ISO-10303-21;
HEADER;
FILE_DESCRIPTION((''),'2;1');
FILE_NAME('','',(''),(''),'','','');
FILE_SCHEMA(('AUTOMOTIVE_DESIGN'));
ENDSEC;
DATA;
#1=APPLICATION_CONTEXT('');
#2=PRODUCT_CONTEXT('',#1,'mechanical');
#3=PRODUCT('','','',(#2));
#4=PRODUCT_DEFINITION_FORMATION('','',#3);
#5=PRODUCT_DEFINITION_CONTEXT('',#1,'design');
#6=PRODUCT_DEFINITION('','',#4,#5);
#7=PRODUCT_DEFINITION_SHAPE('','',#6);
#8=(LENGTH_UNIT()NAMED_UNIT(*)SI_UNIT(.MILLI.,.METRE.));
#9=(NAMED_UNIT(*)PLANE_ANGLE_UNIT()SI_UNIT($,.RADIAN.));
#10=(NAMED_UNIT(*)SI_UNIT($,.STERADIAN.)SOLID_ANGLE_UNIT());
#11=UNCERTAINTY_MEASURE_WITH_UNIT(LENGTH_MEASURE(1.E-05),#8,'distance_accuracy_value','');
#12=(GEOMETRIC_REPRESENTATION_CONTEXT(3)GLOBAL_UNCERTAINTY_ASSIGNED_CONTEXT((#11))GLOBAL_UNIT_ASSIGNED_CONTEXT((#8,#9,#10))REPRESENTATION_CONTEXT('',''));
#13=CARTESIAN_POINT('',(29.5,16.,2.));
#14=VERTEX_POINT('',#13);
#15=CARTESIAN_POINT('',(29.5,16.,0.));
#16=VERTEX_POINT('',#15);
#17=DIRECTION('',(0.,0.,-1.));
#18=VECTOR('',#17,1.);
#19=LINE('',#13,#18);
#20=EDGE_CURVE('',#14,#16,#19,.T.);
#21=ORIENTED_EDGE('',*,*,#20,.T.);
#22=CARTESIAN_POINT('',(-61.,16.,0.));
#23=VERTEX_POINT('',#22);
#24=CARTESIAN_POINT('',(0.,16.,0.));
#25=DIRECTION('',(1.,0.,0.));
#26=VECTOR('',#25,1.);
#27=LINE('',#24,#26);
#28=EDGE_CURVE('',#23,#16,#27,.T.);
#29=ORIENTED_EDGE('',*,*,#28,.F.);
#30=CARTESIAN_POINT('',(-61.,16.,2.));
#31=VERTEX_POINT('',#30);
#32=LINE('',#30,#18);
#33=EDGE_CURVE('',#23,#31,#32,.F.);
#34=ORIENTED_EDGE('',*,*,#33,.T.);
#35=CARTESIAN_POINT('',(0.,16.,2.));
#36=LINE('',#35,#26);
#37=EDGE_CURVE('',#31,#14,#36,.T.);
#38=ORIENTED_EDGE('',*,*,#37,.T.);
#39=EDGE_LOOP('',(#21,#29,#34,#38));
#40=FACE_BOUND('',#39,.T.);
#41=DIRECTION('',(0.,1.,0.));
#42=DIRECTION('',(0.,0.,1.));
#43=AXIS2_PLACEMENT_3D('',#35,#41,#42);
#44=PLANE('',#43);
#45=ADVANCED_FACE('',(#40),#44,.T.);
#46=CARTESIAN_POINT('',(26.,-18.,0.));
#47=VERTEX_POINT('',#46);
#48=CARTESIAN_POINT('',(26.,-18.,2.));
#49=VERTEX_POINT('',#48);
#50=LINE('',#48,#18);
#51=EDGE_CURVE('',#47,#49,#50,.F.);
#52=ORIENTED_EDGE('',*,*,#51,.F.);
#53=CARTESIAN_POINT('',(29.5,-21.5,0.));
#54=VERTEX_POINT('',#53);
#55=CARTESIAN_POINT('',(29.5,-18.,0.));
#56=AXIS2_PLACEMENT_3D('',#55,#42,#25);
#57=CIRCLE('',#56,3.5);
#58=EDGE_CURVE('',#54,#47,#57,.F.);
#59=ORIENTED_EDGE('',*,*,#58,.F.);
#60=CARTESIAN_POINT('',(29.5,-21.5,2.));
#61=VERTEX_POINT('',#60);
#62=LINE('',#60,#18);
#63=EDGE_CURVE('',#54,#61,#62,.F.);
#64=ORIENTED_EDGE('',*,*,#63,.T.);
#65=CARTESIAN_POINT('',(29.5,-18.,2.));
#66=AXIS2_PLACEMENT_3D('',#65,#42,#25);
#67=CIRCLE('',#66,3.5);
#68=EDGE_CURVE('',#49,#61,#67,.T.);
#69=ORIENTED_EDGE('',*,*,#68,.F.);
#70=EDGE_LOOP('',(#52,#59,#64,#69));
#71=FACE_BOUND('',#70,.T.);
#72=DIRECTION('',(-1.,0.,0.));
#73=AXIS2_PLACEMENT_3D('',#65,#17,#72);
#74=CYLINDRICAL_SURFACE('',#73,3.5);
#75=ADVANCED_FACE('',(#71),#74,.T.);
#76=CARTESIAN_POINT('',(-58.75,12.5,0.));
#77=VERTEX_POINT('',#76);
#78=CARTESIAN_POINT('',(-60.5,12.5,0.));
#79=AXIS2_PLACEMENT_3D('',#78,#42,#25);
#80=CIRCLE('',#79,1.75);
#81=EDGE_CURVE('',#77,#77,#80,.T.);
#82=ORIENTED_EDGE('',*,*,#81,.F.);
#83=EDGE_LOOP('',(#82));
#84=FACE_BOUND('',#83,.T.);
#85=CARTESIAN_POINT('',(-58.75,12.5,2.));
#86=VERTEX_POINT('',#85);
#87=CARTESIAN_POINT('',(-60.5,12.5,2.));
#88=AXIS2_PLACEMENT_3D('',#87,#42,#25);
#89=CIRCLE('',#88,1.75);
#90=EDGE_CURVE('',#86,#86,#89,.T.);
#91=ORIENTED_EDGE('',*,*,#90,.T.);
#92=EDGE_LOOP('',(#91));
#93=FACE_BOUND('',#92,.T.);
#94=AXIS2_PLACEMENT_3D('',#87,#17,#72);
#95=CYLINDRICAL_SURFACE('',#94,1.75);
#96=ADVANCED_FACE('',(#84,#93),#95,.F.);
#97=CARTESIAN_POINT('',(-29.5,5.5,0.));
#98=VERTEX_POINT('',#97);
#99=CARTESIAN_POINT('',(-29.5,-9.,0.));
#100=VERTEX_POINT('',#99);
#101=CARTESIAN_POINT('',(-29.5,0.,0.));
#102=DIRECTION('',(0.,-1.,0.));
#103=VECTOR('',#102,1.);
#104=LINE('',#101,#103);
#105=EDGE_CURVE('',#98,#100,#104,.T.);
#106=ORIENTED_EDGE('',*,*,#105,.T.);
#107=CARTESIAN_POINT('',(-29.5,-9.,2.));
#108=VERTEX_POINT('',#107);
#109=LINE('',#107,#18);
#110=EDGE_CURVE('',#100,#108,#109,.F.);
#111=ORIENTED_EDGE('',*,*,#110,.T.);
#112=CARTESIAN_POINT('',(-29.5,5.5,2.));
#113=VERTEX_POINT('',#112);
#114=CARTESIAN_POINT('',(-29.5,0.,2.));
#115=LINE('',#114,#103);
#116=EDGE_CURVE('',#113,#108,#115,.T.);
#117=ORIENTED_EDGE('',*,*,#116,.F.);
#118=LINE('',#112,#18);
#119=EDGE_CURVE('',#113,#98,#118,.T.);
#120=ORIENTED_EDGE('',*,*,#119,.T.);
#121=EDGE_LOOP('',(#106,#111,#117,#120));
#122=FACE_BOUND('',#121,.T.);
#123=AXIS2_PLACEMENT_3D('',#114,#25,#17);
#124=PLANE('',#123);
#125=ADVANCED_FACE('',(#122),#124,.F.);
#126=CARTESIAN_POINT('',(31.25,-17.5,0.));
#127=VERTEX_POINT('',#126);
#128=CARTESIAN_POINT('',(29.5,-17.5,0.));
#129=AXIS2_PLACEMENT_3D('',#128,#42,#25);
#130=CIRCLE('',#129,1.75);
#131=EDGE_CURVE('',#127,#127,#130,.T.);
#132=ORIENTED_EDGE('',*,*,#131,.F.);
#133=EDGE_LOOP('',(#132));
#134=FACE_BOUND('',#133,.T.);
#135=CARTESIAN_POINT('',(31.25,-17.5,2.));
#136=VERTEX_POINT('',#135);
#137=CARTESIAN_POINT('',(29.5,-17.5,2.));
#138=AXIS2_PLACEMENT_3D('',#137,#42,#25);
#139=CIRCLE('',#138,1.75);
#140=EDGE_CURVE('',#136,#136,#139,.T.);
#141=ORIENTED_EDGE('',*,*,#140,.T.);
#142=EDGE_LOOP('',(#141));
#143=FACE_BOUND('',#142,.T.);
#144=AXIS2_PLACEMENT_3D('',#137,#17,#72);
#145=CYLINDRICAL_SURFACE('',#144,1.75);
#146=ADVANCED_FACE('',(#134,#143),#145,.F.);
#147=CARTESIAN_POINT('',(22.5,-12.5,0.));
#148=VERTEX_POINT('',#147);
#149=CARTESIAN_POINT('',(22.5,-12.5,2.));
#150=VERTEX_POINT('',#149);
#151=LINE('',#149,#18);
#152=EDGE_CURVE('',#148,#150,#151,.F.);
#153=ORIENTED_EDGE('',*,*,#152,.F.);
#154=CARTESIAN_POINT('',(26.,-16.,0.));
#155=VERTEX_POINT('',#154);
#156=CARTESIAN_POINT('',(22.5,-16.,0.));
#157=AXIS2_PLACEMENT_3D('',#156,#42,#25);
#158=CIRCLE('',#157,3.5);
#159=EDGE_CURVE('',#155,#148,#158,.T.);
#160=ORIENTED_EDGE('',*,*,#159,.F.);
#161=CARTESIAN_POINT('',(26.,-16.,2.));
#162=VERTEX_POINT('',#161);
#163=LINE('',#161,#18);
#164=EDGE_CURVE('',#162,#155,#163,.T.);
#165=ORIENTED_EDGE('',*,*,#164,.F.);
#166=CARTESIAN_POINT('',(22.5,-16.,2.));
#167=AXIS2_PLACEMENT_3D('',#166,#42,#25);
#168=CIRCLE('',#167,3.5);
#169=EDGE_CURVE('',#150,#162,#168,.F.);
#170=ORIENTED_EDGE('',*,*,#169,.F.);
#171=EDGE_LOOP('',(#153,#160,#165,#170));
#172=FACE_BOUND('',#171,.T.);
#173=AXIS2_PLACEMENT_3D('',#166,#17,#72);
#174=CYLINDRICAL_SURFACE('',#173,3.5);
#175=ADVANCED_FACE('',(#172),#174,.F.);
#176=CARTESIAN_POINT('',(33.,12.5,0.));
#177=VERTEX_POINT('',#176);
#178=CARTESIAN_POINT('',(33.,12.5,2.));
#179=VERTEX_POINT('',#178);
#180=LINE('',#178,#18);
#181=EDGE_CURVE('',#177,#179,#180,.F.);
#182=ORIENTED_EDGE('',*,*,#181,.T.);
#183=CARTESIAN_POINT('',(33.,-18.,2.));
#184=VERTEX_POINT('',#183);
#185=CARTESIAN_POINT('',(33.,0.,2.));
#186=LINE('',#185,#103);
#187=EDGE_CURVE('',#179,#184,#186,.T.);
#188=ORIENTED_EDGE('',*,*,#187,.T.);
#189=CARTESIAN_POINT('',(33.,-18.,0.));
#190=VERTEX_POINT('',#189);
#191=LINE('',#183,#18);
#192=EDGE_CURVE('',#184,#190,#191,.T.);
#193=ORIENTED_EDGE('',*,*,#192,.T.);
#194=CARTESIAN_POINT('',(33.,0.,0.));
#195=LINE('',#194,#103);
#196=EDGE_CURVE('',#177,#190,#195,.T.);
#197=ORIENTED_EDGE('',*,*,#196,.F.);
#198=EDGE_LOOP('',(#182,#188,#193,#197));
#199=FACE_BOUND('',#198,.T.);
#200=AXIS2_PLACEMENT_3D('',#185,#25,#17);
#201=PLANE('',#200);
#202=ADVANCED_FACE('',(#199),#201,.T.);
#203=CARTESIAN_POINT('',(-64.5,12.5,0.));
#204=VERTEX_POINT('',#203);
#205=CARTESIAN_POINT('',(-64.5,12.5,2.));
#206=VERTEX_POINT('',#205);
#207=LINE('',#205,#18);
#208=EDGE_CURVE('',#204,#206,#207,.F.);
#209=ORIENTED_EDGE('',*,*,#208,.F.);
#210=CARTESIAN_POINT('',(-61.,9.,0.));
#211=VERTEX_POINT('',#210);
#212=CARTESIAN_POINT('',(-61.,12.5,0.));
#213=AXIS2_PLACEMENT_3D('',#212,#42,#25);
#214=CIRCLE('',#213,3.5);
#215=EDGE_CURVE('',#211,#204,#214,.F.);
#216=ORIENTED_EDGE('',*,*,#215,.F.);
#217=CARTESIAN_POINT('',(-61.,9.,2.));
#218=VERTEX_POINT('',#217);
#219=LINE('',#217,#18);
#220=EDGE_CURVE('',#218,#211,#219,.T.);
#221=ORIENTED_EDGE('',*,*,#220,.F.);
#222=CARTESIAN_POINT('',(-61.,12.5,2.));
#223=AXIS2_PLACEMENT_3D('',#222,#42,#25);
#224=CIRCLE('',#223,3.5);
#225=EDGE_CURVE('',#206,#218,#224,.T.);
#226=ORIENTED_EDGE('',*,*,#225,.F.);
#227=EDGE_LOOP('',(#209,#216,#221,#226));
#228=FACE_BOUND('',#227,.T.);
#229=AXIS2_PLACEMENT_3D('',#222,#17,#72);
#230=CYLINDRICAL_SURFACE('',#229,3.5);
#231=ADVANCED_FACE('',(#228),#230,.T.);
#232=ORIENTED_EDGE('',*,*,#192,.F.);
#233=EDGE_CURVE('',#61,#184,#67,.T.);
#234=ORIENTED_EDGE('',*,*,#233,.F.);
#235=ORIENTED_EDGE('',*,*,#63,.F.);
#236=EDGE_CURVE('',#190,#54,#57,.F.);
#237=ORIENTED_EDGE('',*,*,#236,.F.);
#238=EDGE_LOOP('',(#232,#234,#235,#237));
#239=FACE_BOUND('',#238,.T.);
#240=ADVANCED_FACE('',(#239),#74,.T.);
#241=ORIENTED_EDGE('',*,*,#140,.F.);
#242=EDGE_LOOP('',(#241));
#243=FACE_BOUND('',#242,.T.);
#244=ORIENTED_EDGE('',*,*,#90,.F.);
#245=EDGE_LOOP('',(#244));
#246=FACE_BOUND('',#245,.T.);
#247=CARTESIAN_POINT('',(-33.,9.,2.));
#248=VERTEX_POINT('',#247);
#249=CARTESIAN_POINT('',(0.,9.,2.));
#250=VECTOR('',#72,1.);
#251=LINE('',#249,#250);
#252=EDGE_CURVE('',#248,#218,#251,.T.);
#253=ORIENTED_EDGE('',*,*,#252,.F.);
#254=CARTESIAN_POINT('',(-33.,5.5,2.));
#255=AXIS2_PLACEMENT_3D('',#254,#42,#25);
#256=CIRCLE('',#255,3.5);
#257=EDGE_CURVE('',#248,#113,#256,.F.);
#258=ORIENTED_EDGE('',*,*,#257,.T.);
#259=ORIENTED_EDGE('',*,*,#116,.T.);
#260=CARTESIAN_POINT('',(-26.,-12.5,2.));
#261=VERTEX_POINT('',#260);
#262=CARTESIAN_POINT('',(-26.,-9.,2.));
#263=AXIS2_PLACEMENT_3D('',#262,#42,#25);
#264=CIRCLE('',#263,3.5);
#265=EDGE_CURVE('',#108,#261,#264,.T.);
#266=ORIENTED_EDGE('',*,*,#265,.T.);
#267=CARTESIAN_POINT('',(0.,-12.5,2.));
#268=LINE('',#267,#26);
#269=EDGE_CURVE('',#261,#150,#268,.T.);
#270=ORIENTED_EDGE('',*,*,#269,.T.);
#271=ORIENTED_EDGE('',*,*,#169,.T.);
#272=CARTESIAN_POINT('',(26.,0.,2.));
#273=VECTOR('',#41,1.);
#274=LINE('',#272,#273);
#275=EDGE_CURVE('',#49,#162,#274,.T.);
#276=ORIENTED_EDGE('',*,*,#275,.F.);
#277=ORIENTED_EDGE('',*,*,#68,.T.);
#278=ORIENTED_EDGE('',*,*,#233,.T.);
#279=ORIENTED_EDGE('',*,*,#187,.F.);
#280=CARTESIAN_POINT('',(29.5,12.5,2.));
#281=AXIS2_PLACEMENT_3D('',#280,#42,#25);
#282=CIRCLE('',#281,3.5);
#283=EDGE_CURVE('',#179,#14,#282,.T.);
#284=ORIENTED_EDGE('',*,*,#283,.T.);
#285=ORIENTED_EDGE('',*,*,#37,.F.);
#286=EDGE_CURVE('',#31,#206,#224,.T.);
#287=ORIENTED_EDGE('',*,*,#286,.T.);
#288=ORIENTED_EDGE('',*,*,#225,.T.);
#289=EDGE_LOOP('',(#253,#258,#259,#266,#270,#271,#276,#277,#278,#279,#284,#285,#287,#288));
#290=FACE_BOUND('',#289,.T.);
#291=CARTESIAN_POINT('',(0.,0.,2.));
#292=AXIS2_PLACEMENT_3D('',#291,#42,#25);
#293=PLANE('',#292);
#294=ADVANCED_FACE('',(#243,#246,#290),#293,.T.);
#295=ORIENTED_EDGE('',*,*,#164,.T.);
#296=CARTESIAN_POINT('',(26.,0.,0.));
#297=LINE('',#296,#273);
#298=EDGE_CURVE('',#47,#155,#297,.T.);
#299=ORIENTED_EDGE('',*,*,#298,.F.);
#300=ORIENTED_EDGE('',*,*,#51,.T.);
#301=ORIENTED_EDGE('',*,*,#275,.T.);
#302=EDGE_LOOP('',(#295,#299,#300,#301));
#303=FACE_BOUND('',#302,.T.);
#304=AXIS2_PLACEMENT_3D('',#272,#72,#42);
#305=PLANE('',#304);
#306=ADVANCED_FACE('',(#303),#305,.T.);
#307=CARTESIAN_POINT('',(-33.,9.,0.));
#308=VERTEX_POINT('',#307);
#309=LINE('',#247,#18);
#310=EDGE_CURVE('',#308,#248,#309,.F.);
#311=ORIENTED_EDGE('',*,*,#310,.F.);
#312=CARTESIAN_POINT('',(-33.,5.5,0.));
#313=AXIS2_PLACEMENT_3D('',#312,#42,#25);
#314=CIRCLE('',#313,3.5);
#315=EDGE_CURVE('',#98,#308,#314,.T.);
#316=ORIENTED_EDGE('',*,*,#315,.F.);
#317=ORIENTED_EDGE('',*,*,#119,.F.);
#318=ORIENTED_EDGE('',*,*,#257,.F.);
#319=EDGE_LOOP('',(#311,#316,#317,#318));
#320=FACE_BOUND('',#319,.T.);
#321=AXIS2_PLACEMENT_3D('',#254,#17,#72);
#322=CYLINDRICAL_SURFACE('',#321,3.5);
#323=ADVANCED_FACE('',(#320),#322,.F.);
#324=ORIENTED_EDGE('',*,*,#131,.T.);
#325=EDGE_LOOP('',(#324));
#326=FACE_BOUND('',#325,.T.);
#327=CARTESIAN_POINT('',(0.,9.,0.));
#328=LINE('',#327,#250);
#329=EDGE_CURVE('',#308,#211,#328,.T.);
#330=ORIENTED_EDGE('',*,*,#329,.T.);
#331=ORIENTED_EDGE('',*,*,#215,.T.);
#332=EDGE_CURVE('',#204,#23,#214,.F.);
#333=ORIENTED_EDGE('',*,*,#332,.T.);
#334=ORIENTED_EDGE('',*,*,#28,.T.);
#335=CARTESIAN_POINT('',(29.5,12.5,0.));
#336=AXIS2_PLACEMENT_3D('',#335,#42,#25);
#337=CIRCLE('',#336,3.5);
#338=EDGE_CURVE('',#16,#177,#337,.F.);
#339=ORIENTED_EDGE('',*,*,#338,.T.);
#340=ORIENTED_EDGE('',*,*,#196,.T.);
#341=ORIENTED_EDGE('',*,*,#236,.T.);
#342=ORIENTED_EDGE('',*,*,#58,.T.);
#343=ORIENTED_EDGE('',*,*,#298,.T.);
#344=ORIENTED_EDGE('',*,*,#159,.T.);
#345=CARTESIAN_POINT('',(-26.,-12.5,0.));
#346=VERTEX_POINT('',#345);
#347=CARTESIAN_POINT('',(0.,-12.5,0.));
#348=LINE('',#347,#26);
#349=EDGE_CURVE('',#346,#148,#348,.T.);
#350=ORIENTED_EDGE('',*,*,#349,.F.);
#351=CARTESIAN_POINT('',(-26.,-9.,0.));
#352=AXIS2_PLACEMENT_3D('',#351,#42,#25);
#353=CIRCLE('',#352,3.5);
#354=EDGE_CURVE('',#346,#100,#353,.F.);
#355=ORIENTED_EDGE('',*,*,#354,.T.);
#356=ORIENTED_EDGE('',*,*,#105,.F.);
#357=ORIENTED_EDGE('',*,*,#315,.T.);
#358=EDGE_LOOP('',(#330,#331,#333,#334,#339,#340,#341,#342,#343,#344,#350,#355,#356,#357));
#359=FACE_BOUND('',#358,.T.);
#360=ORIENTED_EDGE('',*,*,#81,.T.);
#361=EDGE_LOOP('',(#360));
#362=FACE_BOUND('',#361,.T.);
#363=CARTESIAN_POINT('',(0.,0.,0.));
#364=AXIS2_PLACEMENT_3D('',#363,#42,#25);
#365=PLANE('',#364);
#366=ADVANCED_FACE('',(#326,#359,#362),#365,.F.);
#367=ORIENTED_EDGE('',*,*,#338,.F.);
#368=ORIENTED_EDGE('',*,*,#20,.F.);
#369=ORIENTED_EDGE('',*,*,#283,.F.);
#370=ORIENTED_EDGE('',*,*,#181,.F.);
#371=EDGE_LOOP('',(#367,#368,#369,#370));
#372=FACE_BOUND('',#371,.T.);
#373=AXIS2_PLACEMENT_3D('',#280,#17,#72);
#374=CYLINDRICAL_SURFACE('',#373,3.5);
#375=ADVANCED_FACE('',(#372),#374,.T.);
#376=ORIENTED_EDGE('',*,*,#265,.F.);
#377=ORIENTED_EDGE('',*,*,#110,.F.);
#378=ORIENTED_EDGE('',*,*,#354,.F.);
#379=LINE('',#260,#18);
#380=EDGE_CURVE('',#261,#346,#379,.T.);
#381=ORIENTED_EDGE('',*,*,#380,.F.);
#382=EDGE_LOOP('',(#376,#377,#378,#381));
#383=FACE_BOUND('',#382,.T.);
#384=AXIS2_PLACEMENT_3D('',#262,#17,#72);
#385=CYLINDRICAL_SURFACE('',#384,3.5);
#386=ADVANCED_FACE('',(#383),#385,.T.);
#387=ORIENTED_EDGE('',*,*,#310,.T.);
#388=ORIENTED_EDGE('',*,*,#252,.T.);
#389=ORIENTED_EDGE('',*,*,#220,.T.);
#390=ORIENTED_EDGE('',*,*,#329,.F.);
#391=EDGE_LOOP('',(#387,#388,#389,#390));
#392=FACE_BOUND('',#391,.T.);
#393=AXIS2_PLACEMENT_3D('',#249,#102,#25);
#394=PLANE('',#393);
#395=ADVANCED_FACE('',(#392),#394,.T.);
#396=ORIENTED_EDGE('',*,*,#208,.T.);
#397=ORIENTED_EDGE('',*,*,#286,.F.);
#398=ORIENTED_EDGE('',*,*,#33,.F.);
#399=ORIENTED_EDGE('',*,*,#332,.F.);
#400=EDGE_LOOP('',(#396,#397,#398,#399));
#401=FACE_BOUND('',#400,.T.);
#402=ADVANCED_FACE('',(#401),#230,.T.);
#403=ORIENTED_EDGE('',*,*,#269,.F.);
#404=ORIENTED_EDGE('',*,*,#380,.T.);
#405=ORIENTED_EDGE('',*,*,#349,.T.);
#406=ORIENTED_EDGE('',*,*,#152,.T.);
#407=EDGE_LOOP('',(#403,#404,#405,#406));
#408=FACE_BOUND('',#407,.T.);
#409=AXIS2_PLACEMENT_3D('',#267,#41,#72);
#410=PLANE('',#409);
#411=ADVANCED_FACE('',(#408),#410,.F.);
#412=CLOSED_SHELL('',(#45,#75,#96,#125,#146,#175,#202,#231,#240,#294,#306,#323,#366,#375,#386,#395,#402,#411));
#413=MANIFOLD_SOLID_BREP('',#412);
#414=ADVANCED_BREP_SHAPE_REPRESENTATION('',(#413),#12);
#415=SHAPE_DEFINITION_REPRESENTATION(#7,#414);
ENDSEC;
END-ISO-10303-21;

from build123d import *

# Parameters (mm, degrees)
ESQUISSE1_R        = 1.75
BOSS_EXTRU_1_DEPTH = 2
CONG_1_R           = 3.5


with BuildPart() as part:
    # Esquisse1 → Boss.-Extru.1 (new body)
    with BuildSketch(Plane.XY):
        Polygon((-64.5, 9), (-29.5, 9), (-29.5, -12.5), (26, -12.5), (26, -21.5), (33, -21.5), (33, -12.5), (33, 16), (-29.5, 16), (-64.5, 16), align=None)
        with Locations((29.5, -17.5)):
            Circle(ESQUISSE1_R, mode=Mode.SUBTRACT)
        with Locations((-60.5, 12.5)):
            Circle(ESQUISSE1_R, mode=Mode.SUBTRACT)
    extrude(amount=BOSS_EXTRU_1_DEPTH)

    # Congé1
    cong_1_edges = [part.edges().sort_by_distance(p)[0] for p in [
        (33, 16, 1),
        (26, -12.5, 1),
        (-29.5, -12.5, 1),
        (-29.5, 9, 1),
        (-64.5, 16, 1),
        (-64.5, 9, 1),
        (26, -21.5, 1),
        (33, -21.5, 1),
    ]]
    fillet(cong_1_edges, radius=CONG_1_R - 0.0001)  # a hair under: the kernel refuses the full size


solid = part.part
